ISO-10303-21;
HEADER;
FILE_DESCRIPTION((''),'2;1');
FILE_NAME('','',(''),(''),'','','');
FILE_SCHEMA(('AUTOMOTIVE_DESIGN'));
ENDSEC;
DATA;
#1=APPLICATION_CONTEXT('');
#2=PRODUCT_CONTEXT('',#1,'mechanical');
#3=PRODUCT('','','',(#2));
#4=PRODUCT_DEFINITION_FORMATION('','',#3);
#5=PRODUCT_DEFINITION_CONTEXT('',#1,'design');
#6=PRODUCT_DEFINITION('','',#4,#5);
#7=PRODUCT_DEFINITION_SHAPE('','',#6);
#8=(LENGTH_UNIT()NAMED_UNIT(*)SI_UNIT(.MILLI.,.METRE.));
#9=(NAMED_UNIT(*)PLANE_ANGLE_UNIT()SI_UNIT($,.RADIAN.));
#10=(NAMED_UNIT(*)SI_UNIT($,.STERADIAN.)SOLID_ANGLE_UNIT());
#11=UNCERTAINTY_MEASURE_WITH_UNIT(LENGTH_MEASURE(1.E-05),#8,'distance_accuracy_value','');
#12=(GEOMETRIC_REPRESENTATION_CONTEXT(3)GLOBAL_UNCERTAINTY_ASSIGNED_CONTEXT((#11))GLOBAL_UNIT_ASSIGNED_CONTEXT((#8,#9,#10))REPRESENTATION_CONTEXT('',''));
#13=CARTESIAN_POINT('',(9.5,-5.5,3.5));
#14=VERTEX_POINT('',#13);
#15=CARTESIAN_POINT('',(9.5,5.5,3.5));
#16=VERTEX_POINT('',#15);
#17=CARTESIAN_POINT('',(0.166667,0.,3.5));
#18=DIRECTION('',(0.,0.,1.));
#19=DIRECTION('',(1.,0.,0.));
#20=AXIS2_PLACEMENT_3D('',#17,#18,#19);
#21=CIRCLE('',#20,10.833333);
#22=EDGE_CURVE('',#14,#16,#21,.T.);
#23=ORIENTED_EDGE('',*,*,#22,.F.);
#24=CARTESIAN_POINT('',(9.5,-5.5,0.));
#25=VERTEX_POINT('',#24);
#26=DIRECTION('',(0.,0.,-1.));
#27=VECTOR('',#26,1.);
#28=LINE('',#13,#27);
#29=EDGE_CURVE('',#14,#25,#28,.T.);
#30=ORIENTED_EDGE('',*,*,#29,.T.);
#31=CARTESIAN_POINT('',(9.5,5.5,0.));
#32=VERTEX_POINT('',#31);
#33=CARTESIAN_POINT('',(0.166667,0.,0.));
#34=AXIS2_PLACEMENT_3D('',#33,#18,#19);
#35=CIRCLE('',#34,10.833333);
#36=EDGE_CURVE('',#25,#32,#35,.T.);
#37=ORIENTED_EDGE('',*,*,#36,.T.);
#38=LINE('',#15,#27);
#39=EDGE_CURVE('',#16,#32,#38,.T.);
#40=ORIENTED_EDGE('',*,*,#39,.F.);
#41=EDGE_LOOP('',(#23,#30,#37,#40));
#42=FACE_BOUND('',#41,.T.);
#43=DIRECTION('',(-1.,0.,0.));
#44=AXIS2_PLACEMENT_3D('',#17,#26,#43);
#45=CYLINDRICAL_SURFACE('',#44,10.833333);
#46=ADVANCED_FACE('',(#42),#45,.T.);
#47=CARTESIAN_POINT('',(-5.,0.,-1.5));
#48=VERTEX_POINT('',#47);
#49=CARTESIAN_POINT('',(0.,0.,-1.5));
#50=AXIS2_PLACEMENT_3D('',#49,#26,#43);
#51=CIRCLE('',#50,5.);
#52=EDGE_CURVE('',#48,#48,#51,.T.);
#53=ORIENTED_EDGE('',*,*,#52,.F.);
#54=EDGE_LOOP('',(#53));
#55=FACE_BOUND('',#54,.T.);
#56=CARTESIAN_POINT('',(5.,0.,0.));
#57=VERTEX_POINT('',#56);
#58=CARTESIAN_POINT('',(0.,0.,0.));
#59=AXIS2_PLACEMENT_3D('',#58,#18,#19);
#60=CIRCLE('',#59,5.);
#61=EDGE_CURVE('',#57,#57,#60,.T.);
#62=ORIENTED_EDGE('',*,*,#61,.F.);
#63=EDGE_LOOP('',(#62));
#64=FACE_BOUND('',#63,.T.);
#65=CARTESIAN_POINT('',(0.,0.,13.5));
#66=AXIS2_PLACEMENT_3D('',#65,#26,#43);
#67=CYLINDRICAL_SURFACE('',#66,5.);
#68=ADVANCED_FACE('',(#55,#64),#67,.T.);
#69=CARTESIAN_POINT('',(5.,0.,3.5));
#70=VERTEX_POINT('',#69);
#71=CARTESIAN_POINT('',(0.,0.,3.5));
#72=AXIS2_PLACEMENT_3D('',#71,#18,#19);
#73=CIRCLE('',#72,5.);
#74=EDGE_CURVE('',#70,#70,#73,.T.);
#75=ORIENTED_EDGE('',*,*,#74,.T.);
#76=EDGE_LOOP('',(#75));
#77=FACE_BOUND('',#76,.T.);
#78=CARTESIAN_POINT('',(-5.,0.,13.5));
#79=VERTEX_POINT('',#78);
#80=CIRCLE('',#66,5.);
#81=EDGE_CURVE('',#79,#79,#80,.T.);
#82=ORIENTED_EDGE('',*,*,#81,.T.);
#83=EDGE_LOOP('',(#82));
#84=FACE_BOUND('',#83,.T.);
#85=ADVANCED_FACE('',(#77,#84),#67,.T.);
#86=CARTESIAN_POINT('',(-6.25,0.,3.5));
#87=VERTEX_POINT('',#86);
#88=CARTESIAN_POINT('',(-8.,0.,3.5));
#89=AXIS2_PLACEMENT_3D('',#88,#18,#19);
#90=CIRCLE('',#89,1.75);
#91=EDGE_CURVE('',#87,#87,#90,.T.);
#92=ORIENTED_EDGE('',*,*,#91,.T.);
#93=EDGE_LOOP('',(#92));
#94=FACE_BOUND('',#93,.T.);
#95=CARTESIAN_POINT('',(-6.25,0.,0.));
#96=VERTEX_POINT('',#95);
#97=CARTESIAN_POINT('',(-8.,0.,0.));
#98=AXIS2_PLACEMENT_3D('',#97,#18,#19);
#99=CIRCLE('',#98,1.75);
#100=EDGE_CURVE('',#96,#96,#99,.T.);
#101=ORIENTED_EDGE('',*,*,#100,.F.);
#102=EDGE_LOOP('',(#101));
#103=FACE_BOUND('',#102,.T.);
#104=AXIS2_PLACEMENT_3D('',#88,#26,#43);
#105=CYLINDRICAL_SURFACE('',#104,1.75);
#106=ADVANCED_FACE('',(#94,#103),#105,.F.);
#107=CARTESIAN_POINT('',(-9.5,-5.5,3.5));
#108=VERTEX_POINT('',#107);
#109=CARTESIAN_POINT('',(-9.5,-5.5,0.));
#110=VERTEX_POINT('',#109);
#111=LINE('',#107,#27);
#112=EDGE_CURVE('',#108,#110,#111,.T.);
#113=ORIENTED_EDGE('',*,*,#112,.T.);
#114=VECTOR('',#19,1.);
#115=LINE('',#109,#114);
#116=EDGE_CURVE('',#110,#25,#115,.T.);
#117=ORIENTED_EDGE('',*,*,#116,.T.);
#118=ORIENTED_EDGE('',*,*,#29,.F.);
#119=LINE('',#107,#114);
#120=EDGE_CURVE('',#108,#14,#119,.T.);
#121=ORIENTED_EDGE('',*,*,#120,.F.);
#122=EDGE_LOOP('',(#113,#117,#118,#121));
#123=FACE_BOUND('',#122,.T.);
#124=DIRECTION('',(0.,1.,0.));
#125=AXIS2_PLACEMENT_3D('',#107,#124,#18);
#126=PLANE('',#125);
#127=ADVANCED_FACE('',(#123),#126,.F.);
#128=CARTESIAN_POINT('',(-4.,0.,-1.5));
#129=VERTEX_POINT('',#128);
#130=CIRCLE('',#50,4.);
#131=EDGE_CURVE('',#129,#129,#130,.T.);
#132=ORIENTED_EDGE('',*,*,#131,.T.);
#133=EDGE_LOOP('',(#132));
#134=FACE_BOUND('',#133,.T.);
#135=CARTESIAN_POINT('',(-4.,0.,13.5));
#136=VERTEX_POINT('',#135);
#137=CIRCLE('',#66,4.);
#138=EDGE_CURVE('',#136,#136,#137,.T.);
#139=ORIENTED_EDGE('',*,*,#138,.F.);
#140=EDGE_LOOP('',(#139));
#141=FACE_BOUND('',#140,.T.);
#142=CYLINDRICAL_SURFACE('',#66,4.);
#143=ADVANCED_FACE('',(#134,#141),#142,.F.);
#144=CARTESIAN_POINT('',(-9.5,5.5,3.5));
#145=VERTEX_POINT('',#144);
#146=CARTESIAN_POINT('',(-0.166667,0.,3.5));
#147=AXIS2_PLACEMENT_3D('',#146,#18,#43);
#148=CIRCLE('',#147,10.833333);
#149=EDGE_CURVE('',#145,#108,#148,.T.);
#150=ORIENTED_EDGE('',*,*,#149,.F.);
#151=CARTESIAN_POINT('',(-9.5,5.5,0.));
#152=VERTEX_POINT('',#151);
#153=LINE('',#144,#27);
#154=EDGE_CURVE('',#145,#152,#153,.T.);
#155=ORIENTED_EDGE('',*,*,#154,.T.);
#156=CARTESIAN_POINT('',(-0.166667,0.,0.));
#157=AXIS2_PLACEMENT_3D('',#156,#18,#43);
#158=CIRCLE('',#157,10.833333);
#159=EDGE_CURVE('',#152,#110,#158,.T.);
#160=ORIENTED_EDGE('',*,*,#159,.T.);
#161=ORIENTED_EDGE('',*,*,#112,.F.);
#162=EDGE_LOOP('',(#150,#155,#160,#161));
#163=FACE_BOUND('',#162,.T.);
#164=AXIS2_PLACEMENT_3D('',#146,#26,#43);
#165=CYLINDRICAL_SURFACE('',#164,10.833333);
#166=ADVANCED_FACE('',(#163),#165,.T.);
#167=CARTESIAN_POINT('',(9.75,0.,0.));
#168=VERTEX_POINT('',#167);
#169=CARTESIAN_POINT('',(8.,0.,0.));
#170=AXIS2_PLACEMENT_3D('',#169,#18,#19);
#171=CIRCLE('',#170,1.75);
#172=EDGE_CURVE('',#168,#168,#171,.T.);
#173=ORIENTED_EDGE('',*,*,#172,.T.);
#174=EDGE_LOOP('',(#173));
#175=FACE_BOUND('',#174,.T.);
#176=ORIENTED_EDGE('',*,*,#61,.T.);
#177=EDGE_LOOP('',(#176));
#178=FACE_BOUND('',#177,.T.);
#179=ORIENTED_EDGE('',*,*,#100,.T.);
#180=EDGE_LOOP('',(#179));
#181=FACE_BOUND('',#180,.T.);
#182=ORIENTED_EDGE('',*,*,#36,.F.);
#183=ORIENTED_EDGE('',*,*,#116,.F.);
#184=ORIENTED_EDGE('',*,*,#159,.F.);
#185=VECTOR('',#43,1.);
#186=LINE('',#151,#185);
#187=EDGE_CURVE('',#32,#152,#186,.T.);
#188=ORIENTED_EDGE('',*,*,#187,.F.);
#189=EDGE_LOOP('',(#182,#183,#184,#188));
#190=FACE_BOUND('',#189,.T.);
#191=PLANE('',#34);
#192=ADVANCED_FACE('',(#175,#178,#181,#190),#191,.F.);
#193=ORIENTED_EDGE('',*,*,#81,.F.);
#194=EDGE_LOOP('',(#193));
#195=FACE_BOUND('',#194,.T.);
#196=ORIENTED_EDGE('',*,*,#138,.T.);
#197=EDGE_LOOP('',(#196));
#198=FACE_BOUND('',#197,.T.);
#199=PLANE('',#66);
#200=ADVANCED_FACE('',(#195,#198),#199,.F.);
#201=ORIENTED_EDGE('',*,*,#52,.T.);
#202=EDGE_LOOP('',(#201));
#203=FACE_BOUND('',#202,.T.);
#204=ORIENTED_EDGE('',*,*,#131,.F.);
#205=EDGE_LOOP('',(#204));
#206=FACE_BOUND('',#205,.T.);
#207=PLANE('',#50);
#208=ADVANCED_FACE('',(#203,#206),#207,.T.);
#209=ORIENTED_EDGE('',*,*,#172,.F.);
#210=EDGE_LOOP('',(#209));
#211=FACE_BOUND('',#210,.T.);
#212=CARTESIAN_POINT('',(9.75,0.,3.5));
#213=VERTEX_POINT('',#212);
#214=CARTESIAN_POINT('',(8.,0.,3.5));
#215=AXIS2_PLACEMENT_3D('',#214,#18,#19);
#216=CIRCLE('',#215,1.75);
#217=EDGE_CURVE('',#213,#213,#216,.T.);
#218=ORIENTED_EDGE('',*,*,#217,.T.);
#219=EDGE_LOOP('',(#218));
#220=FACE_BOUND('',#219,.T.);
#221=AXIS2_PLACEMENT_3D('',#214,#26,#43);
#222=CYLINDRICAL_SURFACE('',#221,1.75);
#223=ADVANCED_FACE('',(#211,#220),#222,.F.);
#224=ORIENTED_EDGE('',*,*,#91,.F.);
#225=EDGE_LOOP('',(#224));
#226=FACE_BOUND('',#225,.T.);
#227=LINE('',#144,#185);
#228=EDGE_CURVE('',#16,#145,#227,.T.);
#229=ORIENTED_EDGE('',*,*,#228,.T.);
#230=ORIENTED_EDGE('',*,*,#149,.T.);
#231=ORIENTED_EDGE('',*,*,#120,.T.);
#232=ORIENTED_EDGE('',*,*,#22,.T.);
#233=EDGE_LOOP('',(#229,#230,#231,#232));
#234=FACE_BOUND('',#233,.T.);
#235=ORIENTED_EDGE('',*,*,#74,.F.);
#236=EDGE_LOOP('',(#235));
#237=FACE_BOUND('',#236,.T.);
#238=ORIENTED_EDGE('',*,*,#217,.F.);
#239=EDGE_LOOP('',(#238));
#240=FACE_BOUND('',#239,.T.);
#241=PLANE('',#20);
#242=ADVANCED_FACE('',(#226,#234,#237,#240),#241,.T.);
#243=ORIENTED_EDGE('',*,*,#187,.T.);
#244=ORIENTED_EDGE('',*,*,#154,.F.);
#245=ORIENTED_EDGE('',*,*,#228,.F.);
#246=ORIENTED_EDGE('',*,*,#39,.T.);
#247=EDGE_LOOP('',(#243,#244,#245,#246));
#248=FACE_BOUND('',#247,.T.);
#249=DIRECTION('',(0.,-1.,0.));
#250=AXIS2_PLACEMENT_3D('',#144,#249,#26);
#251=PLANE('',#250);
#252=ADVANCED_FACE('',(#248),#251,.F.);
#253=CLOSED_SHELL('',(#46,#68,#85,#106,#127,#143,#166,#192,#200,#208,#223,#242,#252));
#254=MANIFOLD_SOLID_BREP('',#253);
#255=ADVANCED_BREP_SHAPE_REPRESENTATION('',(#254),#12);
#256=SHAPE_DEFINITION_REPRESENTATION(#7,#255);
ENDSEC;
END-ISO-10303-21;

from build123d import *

# Parameters (mm, degrees)
SKETCH_1_R           = 1.75
EXTRUDE_1_DEPTH      = 3.5
EXTRUDE_2_DEPTH      = 1.5
EXTRUDE_2_DEPTH_BACK = 13.5
SKETCH_2_R           = 5
SKETCH_2_R_2         = 4
SKETCH_3_R           = 4
CUT_EXTRUDE_1_DEPTH  = 78.5


with BuildPart() as part:
    # 草图1 → 凸台-拉伸1 (new body)
    with BuildSketch(Plane.XY):
        with BuildLine():
            Line((-9.5, -5.5), (9.5, -5.5))
            ThreePointArc((9.5, -5.5), (11, 0), (9.5, 5.5))
            Line((9.5, 5.5), (-9.5, 5.5))
            ThreePointArc((-9.5, 5.5), (-11, 0), (-9.5, -5.5))
        make_face()
        with Locations((8, 0)):
            Circle(SKETCH_1_R, mode=Mode.SUBTRACT)
        with Locations((-8, 0)):
            Circle(SKETCH_1_R, mode=Mode.SUBTRACT)
    extrude(amount=EXTRUDE_1_DEPTH)

    # 草图2 → 凸台-拉伸2 (add, two sides: drawn at the far end of the back side and taken through both)
    with BuildSketch(Plane(origin=(0, 0, 0), x_dir=(-1, 0, 0), z_dir=(0, 0, -1)).offset(-EXTRUDE_2_DEPTH_BACK)):
        Circle(SKETCH_2_R)
        Circle(SKETCH_2_R_2, mode=Mode.SUBTRACT)
    extrude(amount=EXTRUDE_2_DEPTH + EXTRUDE_2_DEPTH_BACK)

    # 草图3 → 切除-拉伸1 (cut)
    with BuildSketch(Plane(origin=(0, 0, 0), x_dir=(-1, 0, 0), z_dir=(0, 0, -1))):
        Circle(SKETCH_3_R)
    extrude(amount=-CUT_EXTRUDE_1_DEPTH, mode=Mode.SUBTRACT)


solid = part.part
